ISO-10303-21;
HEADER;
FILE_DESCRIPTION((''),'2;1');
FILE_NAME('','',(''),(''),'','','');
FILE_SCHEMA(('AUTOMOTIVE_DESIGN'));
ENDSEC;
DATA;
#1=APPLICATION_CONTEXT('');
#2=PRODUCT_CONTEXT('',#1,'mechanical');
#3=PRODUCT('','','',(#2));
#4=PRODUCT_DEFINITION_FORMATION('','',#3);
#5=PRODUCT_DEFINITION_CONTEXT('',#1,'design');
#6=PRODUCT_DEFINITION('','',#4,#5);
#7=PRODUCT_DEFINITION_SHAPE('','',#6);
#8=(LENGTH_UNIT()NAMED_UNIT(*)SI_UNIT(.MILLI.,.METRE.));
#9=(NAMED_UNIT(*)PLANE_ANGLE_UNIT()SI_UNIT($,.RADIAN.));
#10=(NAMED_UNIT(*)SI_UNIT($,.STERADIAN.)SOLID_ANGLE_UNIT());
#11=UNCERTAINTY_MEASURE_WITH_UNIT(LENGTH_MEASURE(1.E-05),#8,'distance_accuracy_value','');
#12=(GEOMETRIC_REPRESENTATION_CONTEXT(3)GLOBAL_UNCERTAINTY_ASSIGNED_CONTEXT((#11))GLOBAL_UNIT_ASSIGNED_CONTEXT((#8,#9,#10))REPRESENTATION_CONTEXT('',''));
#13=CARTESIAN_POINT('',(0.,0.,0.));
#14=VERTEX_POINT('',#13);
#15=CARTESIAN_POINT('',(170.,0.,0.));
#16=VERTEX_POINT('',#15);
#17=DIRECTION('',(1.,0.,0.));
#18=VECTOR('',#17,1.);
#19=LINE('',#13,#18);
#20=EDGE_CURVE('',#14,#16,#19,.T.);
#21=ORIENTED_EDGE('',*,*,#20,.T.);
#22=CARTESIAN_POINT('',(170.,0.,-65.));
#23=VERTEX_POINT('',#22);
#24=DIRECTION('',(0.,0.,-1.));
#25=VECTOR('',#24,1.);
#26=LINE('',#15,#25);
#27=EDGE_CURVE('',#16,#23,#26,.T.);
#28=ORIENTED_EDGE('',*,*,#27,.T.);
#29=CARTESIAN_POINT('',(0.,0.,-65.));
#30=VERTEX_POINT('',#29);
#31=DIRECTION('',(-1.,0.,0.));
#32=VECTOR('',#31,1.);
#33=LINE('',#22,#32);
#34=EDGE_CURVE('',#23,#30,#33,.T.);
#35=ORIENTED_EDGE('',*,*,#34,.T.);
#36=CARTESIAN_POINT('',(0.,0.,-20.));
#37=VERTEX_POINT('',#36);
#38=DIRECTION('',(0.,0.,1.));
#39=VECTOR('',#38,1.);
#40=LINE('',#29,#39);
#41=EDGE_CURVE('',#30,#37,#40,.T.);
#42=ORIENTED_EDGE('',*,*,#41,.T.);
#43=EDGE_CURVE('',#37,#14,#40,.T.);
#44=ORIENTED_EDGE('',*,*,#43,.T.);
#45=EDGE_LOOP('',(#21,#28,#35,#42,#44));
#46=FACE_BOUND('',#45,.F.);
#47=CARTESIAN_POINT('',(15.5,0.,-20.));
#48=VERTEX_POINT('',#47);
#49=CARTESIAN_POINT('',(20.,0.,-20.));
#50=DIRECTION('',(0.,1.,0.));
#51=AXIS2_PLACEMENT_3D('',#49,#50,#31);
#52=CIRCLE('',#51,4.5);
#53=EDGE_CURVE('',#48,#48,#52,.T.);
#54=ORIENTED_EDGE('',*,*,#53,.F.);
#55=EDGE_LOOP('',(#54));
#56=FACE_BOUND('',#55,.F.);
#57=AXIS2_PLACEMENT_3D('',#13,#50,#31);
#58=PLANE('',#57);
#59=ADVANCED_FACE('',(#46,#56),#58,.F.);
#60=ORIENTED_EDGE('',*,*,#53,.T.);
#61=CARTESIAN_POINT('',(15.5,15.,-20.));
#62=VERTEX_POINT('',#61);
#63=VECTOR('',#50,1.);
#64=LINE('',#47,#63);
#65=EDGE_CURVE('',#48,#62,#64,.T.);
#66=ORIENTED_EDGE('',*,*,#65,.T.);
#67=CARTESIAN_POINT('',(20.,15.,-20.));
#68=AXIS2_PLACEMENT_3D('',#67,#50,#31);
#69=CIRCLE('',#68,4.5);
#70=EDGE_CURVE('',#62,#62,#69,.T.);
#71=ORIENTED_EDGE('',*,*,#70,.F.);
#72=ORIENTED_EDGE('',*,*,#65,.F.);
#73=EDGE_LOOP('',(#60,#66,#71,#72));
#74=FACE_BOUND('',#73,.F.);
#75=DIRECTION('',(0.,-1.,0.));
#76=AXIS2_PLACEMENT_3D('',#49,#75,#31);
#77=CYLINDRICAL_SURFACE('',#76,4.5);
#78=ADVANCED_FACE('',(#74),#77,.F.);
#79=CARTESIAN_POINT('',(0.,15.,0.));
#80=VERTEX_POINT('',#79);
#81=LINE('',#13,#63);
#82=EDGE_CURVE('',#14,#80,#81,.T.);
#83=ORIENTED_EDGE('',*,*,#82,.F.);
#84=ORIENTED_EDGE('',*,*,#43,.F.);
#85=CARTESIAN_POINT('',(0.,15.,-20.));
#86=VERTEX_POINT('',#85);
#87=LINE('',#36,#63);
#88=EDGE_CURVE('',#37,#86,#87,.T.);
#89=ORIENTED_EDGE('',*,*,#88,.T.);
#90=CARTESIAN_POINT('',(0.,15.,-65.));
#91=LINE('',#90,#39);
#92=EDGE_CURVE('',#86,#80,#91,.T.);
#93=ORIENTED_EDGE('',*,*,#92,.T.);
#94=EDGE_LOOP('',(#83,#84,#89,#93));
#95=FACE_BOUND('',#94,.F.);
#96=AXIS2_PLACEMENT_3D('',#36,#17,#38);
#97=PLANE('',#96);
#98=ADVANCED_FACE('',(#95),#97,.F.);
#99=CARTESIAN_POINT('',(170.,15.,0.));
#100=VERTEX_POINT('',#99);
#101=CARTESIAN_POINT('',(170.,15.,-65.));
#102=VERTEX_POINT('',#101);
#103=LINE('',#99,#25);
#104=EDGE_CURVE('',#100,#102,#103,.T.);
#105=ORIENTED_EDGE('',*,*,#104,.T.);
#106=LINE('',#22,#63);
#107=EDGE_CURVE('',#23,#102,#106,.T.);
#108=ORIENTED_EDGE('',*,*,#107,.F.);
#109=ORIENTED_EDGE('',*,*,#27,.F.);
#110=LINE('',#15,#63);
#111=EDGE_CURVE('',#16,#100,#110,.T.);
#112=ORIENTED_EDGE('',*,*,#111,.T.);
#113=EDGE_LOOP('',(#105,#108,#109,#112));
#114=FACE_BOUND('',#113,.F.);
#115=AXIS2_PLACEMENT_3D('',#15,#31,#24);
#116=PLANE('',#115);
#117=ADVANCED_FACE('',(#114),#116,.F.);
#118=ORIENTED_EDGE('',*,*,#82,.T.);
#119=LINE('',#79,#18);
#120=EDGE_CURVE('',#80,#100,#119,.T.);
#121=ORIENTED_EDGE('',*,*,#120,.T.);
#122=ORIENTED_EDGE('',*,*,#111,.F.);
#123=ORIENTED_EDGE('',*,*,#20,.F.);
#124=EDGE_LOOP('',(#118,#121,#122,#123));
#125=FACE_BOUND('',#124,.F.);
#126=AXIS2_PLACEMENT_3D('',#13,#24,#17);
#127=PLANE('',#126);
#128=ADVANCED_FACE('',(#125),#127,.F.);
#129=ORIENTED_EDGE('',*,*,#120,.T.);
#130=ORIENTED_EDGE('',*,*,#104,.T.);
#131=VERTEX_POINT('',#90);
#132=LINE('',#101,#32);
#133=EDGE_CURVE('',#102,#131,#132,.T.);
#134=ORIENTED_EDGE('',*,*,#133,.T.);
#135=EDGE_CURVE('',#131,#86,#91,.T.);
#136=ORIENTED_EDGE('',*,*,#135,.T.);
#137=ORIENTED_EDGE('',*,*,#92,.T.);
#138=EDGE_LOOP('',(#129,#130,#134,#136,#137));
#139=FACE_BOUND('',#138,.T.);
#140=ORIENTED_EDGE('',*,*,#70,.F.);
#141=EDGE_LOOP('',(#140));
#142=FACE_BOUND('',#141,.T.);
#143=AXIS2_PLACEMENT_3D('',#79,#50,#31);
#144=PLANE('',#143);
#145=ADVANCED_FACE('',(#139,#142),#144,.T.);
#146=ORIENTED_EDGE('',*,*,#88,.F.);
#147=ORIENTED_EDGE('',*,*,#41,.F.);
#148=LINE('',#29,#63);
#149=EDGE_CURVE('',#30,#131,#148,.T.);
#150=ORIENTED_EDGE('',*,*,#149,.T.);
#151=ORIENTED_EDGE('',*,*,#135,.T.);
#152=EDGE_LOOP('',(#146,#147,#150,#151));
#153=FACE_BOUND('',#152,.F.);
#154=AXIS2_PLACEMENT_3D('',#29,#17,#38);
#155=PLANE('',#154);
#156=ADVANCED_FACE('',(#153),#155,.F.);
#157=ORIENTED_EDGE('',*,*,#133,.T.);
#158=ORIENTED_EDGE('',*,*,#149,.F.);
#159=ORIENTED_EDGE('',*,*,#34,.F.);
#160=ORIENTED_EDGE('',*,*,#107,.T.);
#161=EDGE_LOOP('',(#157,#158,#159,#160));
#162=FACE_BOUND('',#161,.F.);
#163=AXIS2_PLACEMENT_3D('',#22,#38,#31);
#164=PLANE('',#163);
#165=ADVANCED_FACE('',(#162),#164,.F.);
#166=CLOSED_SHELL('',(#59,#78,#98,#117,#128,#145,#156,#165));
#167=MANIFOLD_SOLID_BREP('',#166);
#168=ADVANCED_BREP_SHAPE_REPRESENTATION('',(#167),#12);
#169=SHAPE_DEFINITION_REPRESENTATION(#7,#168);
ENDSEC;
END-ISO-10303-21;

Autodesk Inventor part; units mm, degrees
ref_plane "YZ Plane" through (0, 0, 0) normal (1, 0, 0) x (0, 1, 0)
ref_plane "XZ Plane" through (0, 0, 0) normal (0, 1, 0) x (-1, 0, 0)
ref_plane "XY Plane" through (0, 0, 0) normal (0, 0, 1) x (1, 0, 0)
sketch "Sketch1" plane through (0, 0, 0) normal (0, 1, 0) x (-1, 0, 0)
  line L0 (0, 0) -> (-170, 0)
  line L1 (-170, 0) -> (-170, -65)
  line L2 (-170, -65) -> (0, -65)
  line L3 (0, -65) -> (0, 0)
  line L4 (0, 0) -> (0, -20)
  line L5 (0, -20) -> (-20, -20)
  circle A0 centre (-20, -20) radius 4.5
  dimension "d0" = 170
  dimension "d1" = 65
  dimension "d2" = 20
  dimension "d3" = 20
  dimension "d4" = 9
extrude "Extrusion1" add sketch "Sketch1" along normal blind 15
properties part number "temp"
